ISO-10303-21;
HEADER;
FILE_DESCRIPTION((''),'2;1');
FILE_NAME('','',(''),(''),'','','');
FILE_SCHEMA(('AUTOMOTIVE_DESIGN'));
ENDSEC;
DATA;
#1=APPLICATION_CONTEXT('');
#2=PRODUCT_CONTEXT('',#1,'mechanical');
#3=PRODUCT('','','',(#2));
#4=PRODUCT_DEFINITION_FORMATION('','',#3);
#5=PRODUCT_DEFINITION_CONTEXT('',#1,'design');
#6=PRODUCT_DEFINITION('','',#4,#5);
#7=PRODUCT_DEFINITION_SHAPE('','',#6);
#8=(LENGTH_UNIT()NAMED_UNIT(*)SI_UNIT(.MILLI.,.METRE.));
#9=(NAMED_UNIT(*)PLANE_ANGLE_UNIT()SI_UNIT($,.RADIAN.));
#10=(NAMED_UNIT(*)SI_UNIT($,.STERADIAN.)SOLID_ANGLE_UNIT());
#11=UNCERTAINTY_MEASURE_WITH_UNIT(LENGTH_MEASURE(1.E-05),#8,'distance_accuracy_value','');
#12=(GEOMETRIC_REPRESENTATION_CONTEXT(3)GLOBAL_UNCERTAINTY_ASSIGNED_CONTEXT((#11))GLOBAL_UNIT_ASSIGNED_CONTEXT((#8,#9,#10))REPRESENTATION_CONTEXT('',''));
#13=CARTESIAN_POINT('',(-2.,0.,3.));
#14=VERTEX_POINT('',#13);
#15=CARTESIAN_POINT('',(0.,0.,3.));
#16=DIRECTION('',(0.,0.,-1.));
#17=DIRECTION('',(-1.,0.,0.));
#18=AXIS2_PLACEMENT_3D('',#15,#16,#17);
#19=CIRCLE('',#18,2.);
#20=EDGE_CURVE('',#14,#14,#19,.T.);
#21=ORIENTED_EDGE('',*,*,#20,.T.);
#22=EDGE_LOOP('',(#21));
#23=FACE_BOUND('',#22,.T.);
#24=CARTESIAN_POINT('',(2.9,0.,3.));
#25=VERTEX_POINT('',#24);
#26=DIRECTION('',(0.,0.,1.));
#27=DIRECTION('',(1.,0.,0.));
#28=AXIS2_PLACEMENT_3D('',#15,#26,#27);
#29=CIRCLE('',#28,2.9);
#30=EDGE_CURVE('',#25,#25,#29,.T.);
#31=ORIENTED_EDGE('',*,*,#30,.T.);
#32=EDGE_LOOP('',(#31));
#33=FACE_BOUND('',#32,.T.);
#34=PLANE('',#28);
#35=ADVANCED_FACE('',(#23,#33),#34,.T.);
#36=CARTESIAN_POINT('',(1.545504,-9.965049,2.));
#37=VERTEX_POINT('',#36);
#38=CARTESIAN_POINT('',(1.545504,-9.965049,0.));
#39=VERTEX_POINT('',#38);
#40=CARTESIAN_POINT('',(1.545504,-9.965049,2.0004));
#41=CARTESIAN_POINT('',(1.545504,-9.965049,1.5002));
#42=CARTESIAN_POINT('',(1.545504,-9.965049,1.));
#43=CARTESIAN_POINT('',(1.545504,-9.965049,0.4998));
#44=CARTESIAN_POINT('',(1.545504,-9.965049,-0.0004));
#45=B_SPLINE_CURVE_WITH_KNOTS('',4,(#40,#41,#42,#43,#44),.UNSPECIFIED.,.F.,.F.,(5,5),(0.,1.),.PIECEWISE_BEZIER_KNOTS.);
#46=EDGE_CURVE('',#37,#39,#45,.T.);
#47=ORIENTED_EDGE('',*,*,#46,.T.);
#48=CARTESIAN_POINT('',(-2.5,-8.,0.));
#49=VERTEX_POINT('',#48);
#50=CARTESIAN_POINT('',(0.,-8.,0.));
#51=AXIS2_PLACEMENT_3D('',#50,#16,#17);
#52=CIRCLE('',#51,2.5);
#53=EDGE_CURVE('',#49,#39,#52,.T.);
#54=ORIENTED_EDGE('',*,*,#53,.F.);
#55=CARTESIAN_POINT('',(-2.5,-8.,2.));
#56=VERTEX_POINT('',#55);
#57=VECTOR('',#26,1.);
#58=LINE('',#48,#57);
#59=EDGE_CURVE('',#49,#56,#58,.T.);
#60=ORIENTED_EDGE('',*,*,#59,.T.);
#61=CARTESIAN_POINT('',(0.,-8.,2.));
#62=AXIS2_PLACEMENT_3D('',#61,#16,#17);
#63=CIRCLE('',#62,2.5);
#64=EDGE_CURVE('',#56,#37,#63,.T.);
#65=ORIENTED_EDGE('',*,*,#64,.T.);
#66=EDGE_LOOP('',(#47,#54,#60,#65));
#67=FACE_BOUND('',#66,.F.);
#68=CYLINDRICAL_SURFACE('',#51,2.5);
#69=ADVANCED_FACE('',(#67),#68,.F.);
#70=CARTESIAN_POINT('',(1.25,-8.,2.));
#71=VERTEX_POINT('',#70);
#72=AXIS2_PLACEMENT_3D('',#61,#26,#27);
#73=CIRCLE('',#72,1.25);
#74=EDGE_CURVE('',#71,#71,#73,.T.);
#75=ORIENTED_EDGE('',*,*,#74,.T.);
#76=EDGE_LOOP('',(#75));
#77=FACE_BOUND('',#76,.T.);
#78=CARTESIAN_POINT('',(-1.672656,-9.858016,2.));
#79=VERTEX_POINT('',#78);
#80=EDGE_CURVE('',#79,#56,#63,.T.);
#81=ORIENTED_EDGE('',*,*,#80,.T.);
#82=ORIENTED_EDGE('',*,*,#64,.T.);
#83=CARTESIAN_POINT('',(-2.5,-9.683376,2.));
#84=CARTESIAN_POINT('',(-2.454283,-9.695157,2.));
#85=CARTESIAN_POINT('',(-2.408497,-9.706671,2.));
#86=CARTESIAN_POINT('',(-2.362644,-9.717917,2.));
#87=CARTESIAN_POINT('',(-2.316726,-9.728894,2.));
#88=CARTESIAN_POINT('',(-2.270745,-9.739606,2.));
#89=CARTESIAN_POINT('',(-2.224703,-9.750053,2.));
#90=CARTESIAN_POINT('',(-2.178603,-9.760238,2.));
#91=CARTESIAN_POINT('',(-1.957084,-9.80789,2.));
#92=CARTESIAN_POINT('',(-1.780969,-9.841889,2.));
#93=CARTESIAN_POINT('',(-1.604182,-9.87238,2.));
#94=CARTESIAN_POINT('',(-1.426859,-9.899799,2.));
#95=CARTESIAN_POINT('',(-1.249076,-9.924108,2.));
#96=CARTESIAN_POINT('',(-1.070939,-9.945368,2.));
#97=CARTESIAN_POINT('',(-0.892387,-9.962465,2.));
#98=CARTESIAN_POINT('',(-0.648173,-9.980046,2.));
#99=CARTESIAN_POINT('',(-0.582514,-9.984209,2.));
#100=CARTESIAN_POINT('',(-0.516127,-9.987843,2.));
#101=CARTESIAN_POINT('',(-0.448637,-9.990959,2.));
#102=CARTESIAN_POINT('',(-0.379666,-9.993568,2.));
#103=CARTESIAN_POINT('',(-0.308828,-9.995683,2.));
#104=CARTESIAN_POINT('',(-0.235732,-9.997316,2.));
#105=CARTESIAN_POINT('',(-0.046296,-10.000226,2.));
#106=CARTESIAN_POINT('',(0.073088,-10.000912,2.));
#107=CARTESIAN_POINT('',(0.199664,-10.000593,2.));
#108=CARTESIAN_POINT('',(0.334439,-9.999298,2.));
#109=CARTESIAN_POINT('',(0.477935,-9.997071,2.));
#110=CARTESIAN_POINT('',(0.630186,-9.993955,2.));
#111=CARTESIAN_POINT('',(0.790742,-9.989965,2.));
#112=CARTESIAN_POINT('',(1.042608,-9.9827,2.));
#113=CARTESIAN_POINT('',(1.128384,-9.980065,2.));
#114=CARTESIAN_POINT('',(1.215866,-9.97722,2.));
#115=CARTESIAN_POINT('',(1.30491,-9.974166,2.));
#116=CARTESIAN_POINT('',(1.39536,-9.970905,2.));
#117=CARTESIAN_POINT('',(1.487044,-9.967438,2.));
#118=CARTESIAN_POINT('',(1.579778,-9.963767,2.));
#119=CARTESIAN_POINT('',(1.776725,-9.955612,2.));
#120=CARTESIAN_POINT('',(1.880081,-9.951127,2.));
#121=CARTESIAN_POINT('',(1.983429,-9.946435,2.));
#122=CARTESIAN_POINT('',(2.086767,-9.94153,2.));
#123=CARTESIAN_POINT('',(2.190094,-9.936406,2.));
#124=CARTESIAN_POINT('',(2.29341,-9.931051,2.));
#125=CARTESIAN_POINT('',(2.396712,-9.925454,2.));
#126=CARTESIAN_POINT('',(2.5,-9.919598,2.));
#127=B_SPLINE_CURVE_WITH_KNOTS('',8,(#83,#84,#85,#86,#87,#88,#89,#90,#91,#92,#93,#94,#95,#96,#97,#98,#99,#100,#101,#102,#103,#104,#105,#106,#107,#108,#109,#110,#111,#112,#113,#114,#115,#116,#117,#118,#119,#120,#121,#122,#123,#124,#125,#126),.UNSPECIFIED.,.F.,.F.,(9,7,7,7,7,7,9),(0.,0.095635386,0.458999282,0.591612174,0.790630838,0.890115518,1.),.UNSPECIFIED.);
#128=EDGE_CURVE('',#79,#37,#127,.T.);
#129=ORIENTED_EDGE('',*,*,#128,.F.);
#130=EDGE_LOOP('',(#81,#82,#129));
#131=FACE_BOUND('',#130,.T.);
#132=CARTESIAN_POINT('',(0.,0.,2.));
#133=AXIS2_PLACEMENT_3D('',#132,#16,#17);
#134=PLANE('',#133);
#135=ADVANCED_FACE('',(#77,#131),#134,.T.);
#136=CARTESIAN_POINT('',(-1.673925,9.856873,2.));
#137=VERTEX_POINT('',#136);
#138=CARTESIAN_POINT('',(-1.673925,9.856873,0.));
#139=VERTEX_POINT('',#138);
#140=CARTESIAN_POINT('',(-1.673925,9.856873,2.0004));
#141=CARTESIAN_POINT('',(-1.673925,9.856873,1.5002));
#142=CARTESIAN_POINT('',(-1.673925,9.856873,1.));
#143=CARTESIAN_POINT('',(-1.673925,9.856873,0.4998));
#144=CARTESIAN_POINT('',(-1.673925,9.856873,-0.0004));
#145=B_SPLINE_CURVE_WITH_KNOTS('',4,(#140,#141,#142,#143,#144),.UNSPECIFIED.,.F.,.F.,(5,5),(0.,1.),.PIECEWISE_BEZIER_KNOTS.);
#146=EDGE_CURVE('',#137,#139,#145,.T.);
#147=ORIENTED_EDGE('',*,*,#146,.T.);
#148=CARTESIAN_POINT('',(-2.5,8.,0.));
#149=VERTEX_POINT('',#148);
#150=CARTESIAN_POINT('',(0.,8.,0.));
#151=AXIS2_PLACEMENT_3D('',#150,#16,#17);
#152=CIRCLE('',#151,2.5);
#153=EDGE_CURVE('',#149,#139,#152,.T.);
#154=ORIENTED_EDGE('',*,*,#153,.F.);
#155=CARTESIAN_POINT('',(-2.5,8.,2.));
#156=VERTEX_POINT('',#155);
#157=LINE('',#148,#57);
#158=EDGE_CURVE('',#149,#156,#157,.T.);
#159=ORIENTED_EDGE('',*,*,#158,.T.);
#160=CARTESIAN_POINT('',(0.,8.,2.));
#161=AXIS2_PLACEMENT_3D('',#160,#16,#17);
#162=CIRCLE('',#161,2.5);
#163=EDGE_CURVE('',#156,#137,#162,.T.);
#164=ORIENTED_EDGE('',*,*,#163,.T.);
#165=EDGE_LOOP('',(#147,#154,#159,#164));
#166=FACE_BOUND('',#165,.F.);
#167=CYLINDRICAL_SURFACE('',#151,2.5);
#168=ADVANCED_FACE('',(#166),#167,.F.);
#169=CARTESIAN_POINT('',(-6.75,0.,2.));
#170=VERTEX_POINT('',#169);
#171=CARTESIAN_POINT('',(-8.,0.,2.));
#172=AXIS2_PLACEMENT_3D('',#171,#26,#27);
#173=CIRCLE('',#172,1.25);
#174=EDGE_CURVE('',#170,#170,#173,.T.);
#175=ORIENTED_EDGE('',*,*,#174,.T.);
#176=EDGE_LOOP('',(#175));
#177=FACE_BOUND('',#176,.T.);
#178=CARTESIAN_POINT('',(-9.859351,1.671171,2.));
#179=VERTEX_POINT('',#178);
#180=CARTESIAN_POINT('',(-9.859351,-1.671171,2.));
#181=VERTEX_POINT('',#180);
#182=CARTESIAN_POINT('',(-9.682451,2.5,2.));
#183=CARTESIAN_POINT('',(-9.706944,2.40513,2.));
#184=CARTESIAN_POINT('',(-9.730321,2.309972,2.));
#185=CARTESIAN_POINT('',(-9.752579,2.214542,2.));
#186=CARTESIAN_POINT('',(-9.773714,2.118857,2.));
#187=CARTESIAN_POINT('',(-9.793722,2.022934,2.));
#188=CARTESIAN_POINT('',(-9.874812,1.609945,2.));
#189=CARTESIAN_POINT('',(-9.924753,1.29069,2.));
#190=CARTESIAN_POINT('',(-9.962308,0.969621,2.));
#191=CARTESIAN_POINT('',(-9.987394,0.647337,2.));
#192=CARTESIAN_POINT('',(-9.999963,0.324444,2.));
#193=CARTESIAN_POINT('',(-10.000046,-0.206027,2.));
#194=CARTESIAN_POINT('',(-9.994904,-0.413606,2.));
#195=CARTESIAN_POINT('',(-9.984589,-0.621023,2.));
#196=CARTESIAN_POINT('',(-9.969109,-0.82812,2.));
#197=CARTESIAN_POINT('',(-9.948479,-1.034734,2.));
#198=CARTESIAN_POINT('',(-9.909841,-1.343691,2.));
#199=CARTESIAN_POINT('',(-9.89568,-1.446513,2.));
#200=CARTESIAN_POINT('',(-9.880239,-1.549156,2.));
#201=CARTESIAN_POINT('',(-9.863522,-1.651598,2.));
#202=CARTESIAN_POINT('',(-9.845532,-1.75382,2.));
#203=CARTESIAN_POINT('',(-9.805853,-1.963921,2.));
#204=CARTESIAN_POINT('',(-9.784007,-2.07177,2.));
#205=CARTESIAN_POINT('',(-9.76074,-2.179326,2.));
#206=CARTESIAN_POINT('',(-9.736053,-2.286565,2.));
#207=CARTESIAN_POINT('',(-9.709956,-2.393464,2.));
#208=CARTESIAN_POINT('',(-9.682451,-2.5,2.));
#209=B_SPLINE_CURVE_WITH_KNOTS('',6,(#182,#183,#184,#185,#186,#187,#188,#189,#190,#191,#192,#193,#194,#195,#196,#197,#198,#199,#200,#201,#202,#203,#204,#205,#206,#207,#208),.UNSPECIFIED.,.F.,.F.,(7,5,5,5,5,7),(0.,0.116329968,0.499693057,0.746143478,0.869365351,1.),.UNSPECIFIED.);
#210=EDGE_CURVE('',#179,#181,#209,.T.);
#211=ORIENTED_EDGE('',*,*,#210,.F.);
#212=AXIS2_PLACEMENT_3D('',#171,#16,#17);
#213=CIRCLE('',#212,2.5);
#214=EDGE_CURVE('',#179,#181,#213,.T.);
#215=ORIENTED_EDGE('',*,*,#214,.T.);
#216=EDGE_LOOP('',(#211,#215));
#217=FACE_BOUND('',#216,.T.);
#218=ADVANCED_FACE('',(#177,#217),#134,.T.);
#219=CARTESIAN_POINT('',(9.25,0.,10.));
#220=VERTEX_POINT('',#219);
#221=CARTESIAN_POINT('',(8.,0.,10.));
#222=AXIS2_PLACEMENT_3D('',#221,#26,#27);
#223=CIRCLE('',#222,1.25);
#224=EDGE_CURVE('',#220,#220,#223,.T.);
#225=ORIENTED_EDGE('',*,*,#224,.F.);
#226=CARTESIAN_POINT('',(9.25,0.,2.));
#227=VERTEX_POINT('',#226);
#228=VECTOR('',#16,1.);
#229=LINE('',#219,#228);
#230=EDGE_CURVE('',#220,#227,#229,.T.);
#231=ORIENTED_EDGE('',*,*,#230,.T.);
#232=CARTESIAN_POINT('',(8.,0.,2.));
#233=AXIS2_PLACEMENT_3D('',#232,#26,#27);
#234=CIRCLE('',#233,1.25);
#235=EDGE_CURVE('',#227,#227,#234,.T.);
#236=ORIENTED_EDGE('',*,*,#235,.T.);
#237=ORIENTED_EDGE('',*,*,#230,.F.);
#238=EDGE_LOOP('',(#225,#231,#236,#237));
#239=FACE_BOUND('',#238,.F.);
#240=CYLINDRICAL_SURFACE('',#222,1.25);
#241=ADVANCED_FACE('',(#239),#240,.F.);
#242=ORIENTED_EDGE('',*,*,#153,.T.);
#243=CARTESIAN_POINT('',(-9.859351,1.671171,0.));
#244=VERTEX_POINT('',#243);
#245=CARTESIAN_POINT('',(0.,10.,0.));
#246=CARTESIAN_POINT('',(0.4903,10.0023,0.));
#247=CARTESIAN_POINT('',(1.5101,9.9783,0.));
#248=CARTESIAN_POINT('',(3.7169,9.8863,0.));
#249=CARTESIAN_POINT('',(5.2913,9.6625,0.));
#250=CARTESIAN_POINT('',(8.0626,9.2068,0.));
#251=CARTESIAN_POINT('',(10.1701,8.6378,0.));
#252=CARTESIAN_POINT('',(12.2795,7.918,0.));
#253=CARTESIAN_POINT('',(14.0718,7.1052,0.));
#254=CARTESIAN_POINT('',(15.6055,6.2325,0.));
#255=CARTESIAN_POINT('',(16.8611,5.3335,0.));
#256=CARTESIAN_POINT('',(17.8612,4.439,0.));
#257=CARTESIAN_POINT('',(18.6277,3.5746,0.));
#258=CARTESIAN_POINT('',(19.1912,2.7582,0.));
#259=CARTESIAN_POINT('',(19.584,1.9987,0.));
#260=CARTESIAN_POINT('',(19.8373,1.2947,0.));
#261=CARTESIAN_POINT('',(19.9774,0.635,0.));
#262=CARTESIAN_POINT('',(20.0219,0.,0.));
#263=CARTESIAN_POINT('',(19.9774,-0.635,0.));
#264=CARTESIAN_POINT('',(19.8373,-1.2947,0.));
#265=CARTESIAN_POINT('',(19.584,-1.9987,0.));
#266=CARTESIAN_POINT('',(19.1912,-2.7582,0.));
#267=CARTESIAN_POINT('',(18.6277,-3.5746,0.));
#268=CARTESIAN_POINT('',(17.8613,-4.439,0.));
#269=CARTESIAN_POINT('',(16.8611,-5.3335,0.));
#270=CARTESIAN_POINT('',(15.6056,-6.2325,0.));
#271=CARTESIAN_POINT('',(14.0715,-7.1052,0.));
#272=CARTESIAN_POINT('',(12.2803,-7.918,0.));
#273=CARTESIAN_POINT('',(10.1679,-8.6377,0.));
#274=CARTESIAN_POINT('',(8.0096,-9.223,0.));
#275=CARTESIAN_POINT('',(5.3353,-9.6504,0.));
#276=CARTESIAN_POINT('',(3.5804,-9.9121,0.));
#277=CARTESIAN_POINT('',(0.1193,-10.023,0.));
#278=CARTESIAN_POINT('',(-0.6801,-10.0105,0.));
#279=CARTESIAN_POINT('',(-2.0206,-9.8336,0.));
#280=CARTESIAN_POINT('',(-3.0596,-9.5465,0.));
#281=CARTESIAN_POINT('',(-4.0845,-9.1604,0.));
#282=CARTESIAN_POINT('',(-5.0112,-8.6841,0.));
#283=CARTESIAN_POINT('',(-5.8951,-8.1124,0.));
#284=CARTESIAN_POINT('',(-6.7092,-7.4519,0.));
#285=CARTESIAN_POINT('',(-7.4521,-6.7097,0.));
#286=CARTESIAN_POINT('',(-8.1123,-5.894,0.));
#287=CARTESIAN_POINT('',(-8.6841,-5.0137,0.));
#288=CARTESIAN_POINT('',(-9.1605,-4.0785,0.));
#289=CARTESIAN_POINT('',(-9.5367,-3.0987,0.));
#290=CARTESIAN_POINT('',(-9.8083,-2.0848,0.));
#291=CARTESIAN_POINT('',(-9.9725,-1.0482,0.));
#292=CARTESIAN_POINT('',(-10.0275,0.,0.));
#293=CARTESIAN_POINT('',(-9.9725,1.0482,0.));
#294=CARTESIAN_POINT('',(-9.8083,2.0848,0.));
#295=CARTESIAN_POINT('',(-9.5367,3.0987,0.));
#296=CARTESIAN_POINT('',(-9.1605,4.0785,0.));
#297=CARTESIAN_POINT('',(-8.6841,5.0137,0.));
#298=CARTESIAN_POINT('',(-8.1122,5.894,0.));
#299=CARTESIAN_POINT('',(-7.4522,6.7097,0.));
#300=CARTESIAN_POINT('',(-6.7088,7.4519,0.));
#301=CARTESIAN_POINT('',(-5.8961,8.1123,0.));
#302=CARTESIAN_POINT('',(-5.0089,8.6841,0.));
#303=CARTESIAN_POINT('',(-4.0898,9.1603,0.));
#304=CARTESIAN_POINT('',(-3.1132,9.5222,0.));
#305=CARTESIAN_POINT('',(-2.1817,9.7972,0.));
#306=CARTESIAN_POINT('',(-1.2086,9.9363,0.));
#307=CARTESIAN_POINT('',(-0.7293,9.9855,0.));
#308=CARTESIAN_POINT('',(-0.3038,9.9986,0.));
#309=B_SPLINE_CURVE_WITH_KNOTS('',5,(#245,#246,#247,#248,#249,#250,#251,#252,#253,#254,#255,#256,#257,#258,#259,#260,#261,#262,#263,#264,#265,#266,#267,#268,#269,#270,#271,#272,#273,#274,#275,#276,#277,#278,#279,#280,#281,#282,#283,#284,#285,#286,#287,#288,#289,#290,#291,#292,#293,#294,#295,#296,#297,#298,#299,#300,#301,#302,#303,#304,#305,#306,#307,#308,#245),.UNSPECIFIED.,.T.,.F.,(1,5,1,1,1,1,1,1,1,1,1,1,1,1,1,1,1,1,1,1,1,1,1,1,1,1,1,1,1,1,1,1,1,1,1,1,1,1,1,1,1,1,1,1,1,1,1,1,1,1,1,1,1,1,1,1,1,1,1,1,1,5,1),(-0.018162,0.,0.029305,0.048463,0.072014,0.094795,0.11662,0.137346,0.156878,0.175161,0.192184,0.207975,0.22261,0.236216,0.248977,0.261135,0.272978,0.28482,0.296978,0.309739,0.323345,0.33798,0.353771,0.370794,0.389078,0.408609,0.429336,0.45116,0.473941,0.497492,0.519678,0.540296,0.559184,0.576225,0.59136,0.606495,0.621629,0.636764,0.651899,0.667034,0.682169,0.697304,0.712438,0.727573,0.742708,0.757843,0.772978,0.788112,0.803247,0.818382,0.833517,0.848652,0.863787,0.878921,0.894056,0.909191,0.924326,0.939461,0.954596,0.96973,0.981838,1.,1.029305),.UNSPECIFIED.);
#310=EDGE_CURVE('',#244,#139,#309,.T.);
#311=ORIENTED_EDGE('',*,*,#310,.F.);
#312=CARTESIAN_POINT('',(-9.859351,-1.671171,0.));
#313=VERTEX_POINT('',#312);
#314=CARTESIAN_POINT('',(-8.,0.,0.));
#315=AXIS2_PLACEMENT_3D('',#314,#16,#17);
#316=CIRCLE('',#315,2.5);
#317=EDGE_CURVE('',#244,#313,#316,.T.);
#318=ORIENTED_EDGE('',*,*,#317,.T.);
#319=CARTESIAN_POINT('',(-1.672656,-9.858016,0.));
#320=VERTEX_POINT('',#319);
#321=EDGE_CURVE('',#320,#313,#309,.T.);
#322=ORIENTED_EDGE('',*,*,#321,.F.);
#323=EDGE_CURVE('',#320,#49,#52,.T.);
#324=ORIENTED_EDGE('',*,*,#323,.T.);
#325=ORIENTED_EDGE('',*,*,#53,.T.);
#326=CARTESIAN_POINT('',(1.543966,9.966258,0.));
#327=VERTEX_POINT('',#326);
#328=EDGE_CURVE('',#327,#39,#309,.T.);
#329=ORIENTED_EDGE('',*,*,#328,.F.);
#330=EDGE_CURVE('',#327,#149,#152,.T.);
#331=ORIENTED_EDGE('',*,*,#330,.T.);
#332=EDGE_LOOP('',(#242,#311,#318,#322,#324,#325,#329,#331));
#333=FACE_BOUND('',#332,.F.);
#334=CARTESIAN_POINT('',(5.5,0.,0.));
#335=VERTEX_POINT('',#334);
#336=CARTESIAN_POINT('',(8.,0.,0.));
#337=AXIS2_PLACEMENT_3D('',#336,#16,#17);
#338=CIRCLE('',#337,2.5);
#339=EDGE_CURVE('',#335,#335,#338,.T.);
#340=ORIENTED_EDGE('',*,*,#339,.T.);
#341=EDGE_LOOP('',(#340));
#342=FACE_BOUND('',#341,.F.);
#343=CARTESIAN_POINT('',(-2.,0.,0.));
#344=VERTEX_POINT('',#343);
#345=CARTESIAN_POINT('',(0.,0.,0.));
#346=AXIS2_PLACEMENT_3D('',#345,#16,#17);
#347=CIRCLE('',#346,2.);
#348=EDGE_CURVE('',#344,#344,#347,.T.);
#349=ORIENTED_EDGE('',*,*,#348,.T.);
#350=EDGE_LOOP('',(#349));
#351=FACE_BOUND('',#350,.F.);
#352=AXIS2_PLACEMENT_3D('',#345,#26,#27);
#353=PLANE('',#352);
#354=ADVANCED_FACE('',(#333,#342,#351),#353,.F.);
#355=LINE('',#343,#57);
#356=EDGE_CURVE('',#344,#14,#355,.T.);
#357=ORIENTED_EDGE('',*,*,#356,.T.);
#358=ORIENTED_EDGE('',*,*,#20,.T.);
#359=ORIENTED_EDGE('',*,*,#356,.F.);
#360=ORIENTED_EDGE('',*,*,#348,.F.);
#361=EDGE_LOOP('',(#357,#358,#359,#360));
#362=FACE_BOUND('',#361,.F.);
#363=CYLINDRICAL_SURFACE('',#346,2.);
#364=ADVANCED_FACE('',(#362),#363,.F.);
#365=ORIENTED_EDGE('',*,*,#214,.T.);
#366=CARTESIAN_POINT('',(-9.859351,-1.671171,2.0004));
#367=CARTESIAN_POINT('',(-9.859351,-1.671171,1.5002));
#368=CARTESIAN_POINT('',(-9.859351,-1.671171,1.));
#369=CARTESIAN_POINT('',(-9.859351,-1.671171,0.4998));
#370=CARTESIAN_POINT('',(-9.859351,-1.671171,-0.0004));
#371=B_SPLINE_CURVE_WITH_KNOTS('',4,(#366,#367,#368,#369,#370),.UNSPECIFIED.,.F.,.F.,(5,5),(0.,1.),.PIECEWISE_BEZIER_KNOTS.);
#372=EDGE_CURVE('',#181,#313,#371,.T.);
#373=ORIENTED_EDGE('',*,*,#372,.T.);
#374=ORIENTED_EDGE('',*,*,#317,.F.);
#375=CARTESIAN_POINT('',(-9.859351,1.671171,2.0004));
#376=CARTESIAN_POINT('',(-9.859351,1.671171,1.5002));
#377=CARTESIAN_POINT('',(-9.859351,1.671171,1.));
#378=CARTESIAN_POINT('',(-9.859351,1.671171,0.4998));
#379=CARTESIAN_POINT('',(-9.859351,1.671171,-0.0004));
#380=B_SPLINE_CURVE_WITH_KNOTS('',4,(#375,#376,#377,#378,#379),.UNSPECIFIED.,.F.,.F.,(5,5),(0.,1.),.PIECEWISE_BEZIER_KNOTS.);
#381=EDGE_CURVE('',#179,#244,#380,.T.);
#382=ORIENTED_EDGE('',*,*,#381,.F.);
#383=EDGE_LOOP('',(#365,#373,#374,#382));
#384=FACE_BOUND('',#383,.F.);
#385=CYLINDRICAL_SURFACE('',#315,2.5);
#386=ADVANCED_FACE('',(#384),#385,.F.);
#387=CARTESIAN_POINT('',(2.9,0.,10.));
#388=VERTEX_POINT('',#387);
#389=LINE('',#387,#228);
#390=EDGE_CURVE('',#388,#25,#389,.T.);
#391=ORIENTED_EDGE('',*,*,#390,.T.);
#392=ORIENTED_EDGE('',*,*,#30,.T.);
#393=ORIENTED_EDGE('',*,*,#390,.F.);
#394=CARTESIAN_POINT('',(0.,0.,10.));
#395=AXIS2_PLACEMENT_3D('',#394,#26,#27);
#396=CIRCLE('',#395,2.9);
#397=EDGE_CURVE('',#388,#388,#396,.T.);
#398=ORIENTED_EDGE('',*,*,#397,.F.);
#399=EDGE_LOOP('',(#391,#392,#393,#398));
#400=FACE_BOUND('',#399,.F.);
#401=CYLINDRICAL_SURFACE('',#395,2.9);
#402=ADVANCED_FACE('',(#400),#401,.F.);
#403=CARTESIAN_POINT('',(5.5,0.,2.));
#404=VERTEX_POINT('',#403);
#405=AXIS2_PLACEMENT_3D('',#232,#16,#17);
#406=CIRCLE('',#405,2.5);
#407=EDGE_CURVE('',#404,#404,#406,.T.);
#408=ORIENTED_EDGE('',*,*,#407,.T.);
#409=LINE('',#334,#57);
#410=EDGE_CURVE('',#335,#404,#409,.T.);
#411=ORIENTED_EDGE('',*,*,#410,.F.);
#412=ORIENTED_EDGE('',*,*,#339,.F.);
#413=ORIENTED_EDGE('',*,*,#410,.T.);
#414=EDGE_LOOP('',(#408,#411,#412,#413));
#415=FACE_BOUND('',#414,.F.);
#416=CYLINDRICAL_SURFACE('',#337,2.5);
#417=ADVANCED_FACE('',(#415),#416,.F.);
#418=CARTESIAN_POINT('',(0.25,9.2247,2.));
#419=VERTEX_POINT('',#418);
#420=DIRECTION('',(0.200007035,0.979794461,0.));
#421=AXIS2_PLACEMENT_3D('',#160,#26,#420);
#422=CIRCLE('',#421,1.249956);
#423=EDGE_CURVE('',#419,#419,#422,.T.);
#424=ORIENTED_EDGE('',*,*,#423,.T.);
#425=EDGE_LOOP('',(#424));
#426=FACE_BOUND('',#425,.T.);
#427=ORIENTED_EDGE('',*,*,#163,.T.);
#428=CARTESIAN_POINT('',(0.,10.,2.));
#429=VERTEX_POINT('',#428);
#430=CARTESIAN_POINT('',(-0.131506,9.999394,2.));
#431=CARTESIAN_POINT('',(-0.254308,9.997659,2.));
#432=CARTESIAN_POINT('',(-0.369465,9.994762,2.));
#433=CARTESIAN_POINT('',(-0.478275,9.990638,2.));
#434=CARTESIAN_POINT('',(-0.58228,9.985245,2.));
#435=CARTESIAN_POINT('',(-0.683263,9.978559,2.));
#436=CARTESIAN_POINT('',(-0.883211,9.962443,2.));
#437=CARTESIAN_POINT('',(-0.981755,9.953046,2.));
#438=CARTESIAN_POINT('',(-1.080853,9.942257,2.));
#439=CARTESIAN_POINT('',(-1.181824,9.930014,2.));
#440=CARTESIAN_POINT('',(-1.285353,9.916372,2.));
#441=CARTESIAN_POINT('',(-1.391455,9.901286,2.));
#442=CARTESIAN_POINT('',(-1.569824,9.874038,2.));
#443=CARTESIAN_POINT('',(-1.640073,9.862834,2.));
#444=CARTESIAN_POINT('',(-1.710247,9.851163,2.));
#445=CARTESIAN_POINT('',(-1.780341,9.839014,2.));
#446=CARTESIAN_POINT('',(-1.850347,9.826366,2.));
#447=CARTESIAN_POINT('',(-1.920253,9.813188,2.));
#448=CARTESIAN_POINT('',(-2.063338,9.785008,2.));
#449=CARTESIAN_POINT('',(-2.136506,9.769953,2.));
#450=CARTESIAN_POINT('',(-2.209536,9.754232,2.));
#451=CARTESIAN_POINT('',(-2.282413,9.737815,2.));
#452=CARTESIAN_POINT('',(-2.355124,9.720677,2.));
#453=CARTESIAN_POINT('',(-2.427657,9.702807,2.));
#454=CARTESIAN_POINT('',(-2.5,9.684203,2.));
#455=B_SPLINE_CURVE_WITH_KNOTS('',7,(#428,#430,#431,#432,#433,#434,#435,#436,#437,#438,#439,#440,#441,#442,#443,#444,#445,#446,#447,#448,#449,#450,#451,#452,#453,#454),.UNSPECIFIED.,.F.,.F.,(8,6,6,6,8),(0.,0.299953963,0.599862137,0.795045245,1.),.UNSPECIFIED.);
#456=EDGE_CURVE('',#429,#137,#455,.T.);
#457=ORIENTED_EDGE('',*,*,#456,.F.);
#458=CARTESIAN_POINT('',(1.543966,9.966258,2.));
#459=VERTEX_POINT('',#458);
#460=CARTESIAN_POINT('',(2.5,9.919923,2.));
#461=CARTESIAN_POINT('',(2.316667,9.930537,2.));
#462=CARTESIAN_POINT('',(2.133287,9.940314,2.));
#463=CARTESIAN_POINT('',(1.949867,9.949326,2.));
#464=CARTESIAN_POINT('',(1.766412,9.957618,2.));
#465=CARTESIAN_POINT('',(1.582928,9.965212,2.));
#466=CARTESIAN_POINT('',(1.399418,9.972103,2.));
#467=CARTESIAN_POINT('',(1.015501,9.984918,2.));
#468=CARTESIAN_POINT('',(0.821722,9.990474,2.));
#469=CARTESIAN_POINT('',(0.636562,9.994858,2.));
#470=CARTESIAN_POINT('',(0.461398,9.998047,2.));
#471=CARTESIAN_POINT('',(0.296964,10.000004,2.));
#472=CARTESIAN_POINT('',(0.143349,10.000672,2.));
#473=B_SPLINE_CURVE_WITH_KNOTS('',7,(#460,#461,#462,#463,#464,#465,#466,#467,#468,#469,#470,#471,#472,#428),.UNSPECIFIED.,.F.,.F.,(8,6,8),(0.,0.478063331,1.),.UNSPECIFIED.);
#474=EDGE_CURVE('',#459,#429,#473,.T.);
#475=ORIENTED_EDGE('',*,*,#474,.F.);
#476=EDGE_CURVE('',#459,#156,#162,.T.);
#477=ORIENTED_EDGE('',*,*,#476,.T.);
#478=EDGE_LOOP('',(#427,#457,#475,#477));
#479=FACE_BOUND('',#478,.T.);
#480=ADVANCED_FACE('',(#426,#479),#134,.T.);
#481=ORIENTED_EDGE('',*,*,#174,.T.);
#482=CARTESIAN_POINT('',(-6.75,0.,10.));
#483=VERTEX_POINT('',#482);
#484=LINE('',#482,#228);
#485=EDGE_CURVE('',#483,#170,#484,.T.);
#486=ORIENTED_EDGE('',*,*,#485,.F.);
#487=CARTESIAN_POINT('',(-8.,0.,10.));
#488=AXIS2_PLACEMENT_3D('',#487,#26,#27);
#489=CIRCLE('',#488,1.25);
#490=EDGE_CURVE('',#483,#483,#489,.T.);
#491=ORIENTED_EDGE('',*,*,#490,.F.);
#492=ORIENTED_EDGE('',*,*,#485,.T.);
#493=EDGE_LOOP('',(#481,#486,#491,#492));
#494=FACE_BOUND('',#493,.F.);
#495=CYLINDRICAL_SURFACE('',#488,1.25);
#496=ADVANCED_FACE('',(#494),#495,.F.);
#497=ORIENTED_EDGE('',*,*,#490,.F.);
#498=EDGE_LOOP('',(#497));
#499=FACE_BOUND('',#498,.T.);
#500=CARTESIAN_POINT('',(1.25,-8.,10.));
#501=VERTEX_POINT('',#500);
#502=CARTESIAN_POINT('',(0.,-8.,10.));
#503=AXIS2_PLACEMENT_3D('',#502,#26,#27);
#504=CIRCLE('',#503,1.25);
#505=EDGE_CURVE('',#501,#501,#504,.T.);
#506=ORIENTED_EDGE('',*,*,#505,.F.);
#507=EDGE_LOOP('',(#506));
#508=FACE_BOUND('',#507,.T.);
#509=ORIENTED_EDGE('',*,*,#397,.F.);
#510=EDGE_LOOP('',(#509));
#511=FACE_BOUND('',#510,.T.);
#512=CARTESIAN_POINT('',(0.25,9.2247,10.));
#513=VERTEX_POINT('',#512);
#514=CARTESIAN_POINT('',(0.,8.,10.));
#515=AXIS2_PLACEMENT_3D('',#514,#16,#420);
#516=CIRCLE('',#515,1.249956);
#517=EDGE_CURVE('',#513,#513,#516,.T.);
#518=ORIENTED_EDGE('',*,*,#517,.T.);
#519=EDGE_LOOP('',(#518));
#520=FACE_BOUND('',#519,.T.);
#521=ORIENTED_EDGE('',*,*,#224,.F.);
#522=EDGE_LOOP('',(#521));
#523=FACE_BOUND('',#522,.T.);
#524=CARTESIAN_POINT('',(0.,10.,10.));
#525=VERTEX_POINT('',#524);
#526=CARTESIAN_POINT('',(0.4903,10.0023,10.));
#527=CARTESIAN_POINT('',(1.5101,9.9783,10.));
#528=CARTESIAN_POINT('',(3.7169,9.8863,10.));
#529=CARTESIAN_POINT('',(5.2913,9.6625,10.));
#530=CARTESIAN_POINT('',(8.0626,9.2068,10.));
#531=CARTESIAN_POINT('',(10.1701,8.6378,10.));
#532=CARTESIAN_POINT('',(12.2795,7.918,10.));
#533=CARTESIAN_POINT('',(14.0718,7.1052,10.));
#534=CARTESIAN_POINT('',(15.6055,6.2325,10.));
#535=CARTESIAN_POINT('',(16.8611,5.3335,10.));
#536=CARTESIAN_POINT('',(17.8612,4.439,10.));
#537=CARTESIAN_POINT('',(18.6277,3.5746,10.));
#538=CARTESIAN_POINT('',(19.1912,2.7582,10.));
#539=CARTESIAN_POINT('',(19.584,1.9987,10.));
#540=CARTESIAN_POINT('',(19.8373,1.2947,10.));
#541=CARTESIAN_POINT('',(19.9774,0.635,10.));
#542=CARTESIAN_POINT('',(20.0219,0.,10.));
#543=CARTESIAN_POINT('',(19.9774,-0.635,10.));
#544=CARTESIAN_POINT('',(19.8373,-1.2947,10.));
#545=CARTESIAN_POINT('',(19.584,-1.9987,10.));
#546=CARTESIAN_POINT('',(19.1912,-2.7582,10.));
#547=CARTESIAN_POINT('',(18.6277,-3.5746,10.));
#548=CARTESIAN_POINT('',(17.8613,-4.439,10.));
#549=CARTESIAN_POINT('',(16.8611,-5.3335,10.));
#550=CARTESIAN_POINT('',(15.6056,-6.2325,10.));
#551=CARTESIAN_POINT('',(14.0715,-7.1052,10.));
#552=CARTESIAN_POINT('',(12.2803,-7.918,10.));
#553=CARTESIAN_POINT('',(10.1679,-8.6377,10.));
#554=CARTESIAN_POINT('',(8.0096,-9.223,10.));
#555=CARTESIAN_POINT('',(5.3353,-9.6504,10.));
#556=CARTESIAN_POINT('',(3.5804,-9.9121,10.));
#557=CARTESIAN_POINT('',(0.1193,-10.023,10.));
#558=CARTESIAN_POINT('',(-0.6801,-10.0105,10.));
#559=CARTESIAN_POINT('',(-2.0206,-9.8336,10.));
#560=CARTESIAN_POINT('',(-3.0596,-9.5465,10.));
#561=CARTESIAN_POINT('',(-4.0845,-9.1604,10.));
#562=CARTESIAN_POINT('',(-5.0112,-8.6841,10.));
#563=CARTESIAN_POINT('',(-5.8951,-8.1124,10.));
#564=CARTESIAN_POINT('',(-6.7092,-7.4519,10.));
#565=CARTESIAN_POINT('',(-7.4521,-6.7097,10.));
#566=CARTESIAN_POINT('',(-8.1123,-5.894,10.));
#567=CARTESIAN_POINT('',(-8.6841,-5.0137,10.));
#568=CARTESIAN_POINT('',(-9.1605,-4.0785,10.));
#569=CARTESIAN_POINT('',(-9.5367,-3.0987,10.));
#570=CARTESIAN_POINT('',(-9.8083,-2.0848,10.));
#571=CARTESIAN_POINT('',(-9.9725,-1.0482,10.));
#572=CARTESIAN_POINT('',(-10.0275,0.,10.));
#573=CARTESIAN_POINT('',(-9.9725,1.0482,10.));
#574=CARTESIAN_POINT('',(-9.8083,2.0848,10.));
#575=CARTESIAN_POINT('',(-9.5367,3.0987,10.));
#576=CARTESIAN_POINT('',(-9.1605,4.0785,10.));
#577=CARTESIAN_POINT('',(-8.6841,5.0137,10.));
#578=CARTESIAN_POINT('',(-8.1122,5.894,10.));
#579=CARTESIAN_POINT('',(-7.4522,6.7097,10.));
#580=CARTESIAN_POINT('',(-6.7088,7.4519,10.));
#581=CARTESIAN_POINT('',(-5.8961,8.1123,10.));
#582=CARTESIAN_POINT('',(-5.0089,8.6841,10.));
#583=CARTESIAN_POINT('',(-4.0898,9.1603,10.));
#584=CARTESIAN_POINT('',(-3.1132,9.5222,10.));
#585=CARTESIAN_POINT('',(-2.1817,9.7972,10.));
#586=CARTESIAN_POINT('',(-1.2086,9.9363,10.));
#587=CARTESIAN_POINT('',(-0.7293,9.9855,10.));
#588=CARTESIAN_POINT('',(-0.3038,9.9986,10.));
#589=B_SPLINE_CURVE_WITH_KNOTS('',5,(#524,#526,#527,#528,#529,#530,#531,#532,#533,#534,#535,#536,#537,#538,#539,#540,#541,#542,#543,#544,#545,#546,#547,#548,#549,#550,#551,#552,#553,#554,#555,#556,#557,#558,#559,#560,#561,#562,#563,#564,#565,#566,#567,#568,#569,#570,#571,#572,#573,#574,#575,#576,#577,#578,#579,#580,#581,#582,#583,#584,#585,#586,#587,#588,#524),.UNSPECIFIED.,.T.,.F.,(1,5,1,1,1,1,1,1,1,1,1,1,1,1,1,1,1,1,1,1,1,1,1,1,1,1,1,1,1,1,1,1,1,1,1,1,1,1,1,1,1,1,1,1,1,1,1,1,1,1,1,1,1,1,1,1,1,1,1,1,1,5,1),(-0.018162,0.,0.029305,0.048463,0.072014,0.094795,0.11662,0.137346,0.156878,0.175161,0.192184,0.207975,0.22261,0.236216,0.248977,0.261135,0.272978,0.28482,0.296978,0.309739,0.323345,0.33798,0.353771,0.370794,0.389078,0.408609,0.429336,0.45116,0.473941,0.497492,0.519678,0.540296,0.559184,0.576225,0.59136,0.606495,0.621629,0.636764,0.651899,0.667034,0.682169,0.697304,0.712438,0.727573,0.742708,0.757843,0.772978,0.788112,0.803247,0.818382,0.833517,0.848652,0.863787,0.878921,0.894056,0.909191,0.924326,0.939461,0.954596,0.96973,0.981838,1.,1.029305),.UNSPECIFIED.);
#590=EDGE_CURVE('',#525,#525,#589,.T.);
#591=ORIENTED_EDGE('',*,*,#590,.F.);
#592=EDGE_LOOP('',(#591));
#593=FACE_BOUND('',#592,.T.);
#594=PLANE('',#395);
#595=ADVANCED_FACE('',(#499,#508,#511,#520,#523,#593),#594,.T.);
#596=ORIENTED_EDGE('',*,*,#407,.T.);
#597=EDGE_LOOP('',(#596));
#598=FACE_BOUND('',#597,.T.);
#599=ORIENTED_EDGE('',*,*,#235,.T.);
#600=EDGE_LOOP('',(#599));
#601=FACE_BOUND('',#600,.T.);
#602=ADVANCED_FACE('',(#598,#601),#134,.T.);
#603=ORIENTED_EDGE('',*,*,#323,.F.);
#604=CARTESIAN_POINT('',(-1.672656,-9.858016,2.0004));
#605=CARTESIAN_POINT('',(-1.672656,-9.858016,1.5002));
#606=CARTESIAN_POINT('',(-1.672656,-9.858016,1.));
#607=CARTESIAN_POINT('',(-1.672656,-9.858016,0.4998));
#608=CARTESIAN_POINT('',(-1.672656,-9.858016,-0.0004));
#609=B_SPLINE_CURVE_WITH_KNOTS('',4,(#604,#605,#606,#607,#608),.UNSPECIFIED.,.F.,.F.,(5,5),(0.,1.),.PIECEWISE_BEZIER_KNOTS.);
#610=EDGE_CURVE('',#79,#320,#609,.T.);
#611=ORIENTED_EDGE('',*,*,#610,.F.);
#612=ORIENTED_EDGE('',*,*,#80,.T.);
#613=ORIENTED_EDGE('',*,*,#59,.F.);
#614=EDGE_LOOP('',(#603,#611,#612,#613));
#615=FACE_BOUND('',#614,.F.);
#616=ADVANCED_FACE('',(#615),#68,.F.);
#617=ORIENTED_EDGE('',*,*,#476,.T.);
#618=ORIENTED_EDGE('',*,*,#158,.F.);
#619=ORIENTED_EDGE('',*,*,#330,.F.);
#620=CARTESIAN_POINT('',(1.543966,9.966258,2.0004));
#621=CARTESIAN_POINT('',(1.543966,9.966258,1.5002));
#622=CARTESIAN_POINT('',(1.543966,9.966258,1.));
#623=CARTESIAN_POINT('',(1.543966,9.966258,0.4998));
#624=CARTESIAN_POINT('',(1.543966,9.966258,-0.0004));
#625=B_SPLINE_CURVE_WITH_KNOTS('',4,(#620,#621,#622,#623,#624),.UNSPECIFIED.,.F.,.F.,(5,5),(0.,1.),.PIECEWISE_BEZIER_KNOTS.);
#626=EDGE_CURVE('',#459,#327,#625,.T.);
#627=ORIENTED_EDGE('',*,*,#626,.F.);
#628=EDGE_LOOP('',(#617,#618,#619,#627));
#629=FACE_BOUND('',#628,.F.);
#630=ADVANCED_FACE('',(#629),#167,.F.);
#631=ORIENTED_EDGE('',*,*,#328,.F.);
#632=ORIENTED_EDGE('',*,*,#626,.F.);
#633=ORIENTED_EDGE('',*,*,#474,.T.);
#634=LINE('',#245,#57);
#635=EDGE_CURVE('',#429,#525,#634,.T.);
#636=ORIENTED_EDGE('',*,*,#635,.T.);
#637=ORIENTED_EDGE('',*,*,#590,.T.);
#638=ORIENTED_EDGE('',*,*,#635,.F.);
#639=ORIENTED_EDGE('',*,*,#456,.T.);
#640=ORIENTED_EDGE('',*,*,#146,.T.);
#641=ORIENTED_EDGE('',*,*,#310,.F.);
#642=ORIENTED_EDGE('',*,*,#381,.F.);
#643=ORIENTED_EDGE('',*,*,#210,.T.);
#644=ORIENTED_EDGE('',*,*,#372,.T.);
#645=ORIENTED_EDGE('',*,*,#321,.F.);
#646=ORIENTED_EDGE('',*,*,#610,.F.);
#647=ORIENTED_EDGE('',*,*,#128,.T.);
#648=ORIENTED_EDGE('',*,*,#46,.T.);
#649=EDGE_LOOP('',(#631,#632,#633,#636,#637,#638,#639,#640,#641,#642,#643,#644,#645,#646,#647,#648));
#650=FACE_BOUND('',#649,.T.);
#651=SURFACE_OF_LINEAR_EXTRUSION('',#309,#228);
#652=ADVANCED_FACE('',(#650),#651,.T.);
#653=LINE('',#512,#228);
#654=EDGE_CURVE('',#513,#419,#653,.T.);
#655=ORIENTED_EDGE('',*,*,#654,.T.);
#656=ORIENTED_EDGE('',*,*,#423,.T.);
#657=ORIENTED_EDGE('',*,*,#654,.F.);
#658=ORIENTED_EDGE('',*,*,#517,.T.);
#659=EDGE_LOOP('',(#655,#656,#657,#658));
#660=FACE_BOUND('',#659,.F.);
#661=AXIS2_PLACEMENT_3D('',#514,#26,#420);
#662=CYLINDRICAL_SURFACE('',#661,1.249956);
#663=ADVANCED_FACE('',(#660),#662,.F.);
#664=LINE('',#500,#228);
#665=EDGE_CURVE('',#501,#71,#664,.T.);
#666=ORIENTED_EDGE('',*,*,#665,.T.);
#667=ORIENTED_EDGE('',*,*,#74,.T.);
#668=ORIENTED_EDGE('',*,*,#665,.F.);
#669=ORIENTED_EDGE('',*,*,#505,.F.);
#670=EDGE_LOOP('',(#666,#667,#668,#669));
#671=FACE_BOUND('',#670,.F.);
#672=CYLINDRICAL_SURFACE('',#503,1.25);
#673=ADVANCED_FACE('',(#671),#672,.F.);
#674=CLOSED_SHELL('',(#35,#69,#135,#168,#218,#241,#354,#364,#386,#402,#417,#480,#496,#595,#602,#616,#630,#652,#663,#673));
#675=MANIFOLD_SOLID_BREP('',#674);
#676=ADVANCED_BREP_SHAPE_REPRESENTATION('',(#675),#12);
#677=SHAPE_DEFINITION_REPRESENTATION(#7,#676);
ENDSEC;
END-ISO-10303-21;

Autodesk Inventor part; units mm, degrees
ref_plane "YZ Plane" through (0, 0, 0) normal (1, 0, 0) x (0, 1, 0)
ref_plane "XZ Plane" through (0, 0, 0) normal (0, 1, 0) x (-1, 0, 0)
ref_plane "XY Plane" through (0, 0, 0) normal (0, 0, 1) x (1, 0, 0)
sketch "Основной эскиз" plane through (0, 0, 0) normal (0, 0, 1) x (1, 0, 0)
  spline S0 degree 5 poles (0, 10) (0.4903, 10.0023) (1.5101, 9.9783) (3.7169, 9.8863) (5.2913, 9.6625) (8.0626, 9.2068) (10.1701, 8.6378) (12.2795, 7.918) (14.0718, 7.1052) (15.6055, 6.2325) (16.8611, 5.3335) (17.8612, 4.439) (18.6277, 3.5746) (19.1912, 2.7582) (19.584, 1.9987) (19.8373, 1.2947) (19.9774, 0.635) (20.0219, 0) (19.9774, -0.635) (19.8373, -1.2947) (19.584, -1.9987) (19.1912, -2.7582) (18.6277, -3.5746) (17.8613, -4.439) (16.8611, -5.3335) (15.6056, -6.2325) (14.0715, -7.1052) (12.2803, -7.918) (10.1679, -8.6377) (8.0096, -9.223) (5.3353, -9.6504) (3.5804, -9.9121) (0.1193, -10.023) (-0.6801, -10.0105) (-2.0206, -9.8336) (-3.0596, -9.5465) (-4.0845, -9.1604) (-5.0112, -8.6841) (-5.8951, -8.1124) (-6.7092, -7.4519) (-7.4521, -6.7097) (-8.1123, -5.894) (-8.6841, -5.0137) (-9.1605, -4.0785) (-9.5367, -3.0987) (-9.8083, -2.0848) (-9.9725, -1.0482) (-10.0275, 0) (-9.9725, 1.0482) (-9.8083, 2.0848) (-9.5367, 3.0987) (-9.1605, 4.0785) (-8.6841, 5.0137) (-8.1122, 5.894) (-7.4522, 6.7097) (-6.7088, 7.4519) (-5.8961, 8.1123) (-5.0089, 8.6841) (-4.0898, 9.1603) (-3.1132, 9.5222) (-2.1817, 9.7972) (-1.2086, 9.9363) (-0.7293, 9.9855) (-0.3038, 9.9986) (0, 10) knots 0 0 0 0 0 0 0.029305 0.048463 0.072014 0.094795 0.11662 0.137346 0.156878 0.175161 0.192184 0.207975 0.22261 0.236216 0.248977 0.261135 0.272978 0.28482 0.296978 0.309739 0.323345 0.33798 0.353771 0.370794 0.389078 0.408609 0.429336 0.45116 0.473941 0.497492 0.519678 0.540296 0.559184 0.576225 0.59136 0.606495 0.621629 0.636764 0.651899 0.667034 0.682169 0.697304 0.712438 0.727573 0.742708 0.757843 0.772978 0.788112 0.803247 0.818382 0.833517 0.848652 0.863787 0.878921 0.894056 0.909191 0.924326 0.939461 0.954596 0.96973 0.981838 1 1 1 1 1 1
  point P0 (5.4767, 9.6166)
  point P1 (8.0209, 9.1553)
  point P2 (10.3525, 8.5413)
  point P3 (12.4298, 7.8038)
  point P4 (14.229, 6.9759)
  point P5 (15.7425, 6.0929)
  point P6 (16.977, 5.1896)
  point P7 (17.9502, 4.2975)
  point P8 (18.6889, 3.4429)
  point P9 (19.2256, 2.6435)
  point P10 (19.5949, 1.9073)
  point P11 (19.8303, 1.2315)
  point P12 (19.9592, 0.6029)
  point P13 (20, 0)
  point P14 (19.9592, -0.6029)
  point P15 (19.8303, -1.2315)
  point P16 (19.5949, -1.9073)
  point P17 (19.2256, -2.6435)
  point P18 (18.6889, -3.4429)
  point P19 (17.9502, -4.2975)
  point P20 (16.977, -5.1896)
  point P21 (15.7425, -6.0929)
  point P22 (14.229, -6.9759)
  point P23 (12.4298, -7.8038)
  point P24 (10.3525, -8.5413)
  point P25 (8.0209, -9.1553)
  point P26 (5.4767, -9.6166)
  point P27 (2.7788, -9.9029)
  point P28 (0, -10)
  point P29 (-1.0453, -9.9452)
  point P30 (-2.0791, -9.7815)
  point P31 (-3.0902, -9.5106)
  point P32 (-4.0674, -9.1355)
  point P33 (-5, -8.6603)
  point P34 (-5.8779, -8.0902)
  point P35 (-6.6913, -7.4314)
  point P36 (-7.4314, -6.6913)
  point P37 (-8.0902, -5.8779)
  point P38 (-8.6603, -5)
  point P39 (-9.1355, -4.0674)
  point P40 (-9.5106, -3.0902)
  point P41 (-9.7815, -2.0791)
  point P42 (-9.9452, -1.0453)
  point P43 (-10, 0)
  point P44 (-9.9452, 1.0453)
  point P45 (-9.7815, 2.0791)
  point P46 (-9.5106, 3.0902)
  point P47 (-9.1355, 4.0674)
  point P48 (-8.6603, 5)
  point P49 (-8.0902, 5.8779)
  point P50 (-7.4314, 6.6913)
  point P51 (-6.6913, 7.4314)
  point P52 (-5.8779, 8.0902)
  point P53 (-5, 8.6603)
  point P54 (-4.0674, 9.1355)
  point P55 (-3.0902, 9.5106)
  point P56 (-2.0791, 9.7815)
  point P57 (-1.0453, 9.9452)
extrude "Кулачок" add sketch "Основной эскиз" along normal blind 10
sketch "Эскиз2" plane through (0, 0, 10) normal (0, 0, 1) x (1, 0, 0)
  arc A0 (-0.25, 9.2247) -> (0.25, 9.2247) centre (0, 8) ccw
  line L0 (-0.25, 10.9972) -> (-0.25, 9.2247)
  arc A1 (-0.25, 10.9972) -> (-1.1469, -10.94) centre (0, 0) ccw
  line L1 (-1.1469, -10.6297) -> (-1.1469, -10.94)
  line L2 (-0.8473, -10.6297) -> (-1.1469, -10.6297)
  line L3 (-0.8473, -10.9673) -> (-0.8473, -10.6297)
  arc A2 (-0.8473, -10.9673) -> (0.8535, -10.9668) centre (0, 0) ccw
  line L4 (0.8535, -10.6297) -> (0.8535, -10.9668)
  line L5 (1.1541, -10.6297) -> (0.8535, -10.6297)
  line L6 (1.1541, -10.9393) -> (1.1541, -10.6297)
  arc A3 (1.1541, -10.9393) -> (0.25, 10.9972) centre (0, 0) ccw
  line L7 (0.25, 9.2247) -> (0.25, 10.9972)
  circle A4 centre (8, 0) radius 1.25
  circle A5 centre (0, -8) radius 1.25
  circle A6 centre (-8, 0) radius 1.25
  circle A7 centre (0, -5.5) radius 0.75
  circle A8 centre (4.7631, 2.75) radius 0.75
  circle A9 centre (-4.7631, 2.75) radius 0.75
  circle A10 centre (0, 0) radius 2.9
  arc A11 (0.25, 9.2247) -> (-0.25, 9.2247) centre (0, 8) ccw
extrude "Выдавливание2" cut sketch "Эскиз2" against normal blind 10 contours A11 A0 | A4 | A5 | A6
sketch "Эскиз3" plane through (0, 0, 10) normal (0, 0, 1) x (1, 0, 0)
  arc A0 (-0.25, 9.2247) -> (0.25, 9.2247) centre (0, 8) ccw
  line L0 (-0.25, 10.9972) -> (-0.25, 9.2247)
  arc A1 (-0.25, 10.9972) -> (-1.1469, -10.94) centre (0, 0) ccw
  line L1 (-1.1469, -10.6297) -> (-1.1469, -10.94)
  line L2 (-0.8473, -10.6297) -> (-1.1469, -10.6297)
  line L3 (-0.8473, -10.9673) -> (-0.8473, -10.6297)
  arc A2 (-0.8473, -10.9673) -> (0.8535, -10.9668) centre (0, 0) ccw
  line L4 (0.8535, -10.6297) -> (0.8535, -10.9668)
  line L5 (1.1541, -10.6297) -> (0.8535, -10.6297)
  line L6 (1.1541, -10.9393) -> (1.1541, -10.6297)
  arc A3 (1.1541, -10.9393) -> (0.25, 10.9972) centre (0, 0) ccw
  line L7 (0.25, 9.2247) -> (0.25, 10.9972)
  circle A4 centre (8, 0) radius 1.25
  circle A5 centre (0, -8) radius 1.25
  circle A6 centre (-8, 0) radius 1.25
  circle A7 centre (0, -5.5) radius 0.75
  circle A8 centre (4.7631, 2.75) radius 0.75
  circle A9 centre (-4.7631, 2.75) radius 0.75
  circle A10 centre (0, 0) radius 2.9
  arc A11 (0.25, 9.2247) -> (-0.25, 9.2247) centre (0, 8) ccw
extrude "Выдавливание3" cut sketch "Эскиз3" against normal blind 7 contours A10
sketch "Эскиз4" plane through (0, 0, 0) normal (0, 0, -1) x (-1, 0, 0)
  circle A0 centre (0, 0) radius 2
  dimension "d8" = 4
extrude "Выдавливание4" cut sketch "Эскиз4" against normal blind 7
sketch "Эскиз5" plane through (0, 0, 0) normal (0, 0, -1) x (-1, 0, 0)
  circle A0 centre (0, 8) radius 1.25 projected
  circle A1 centre (0, 8) radius 2.5
  circle A2 centre (8, 0) radius 1.25 projected
  circle A3 centre (8, 0) radius 2.5
  circle A4 centre (0, -8) radius 1.25 projected
  circle A5 centre (0, -8) radius 2.5
  circle A6 centre (-8, 0) radius 1.25 projected
  circle A7 centre (-8, 0) radius 2.5
  point P0 (0, 0)
  dimension "d11" = 5
  dimension "d12" = 5
  dimension "d13" = 5
  dimension "d14" = 5
extrude "Выдавливание5" cut sketch "Эскиз5" against normal blind 2 contours A0 | A1 | A2 | A3 | A4 | A5 | A6 | A7
properties part number "Дисковый кулачок" material "Stainless Steel, Austenitic"
